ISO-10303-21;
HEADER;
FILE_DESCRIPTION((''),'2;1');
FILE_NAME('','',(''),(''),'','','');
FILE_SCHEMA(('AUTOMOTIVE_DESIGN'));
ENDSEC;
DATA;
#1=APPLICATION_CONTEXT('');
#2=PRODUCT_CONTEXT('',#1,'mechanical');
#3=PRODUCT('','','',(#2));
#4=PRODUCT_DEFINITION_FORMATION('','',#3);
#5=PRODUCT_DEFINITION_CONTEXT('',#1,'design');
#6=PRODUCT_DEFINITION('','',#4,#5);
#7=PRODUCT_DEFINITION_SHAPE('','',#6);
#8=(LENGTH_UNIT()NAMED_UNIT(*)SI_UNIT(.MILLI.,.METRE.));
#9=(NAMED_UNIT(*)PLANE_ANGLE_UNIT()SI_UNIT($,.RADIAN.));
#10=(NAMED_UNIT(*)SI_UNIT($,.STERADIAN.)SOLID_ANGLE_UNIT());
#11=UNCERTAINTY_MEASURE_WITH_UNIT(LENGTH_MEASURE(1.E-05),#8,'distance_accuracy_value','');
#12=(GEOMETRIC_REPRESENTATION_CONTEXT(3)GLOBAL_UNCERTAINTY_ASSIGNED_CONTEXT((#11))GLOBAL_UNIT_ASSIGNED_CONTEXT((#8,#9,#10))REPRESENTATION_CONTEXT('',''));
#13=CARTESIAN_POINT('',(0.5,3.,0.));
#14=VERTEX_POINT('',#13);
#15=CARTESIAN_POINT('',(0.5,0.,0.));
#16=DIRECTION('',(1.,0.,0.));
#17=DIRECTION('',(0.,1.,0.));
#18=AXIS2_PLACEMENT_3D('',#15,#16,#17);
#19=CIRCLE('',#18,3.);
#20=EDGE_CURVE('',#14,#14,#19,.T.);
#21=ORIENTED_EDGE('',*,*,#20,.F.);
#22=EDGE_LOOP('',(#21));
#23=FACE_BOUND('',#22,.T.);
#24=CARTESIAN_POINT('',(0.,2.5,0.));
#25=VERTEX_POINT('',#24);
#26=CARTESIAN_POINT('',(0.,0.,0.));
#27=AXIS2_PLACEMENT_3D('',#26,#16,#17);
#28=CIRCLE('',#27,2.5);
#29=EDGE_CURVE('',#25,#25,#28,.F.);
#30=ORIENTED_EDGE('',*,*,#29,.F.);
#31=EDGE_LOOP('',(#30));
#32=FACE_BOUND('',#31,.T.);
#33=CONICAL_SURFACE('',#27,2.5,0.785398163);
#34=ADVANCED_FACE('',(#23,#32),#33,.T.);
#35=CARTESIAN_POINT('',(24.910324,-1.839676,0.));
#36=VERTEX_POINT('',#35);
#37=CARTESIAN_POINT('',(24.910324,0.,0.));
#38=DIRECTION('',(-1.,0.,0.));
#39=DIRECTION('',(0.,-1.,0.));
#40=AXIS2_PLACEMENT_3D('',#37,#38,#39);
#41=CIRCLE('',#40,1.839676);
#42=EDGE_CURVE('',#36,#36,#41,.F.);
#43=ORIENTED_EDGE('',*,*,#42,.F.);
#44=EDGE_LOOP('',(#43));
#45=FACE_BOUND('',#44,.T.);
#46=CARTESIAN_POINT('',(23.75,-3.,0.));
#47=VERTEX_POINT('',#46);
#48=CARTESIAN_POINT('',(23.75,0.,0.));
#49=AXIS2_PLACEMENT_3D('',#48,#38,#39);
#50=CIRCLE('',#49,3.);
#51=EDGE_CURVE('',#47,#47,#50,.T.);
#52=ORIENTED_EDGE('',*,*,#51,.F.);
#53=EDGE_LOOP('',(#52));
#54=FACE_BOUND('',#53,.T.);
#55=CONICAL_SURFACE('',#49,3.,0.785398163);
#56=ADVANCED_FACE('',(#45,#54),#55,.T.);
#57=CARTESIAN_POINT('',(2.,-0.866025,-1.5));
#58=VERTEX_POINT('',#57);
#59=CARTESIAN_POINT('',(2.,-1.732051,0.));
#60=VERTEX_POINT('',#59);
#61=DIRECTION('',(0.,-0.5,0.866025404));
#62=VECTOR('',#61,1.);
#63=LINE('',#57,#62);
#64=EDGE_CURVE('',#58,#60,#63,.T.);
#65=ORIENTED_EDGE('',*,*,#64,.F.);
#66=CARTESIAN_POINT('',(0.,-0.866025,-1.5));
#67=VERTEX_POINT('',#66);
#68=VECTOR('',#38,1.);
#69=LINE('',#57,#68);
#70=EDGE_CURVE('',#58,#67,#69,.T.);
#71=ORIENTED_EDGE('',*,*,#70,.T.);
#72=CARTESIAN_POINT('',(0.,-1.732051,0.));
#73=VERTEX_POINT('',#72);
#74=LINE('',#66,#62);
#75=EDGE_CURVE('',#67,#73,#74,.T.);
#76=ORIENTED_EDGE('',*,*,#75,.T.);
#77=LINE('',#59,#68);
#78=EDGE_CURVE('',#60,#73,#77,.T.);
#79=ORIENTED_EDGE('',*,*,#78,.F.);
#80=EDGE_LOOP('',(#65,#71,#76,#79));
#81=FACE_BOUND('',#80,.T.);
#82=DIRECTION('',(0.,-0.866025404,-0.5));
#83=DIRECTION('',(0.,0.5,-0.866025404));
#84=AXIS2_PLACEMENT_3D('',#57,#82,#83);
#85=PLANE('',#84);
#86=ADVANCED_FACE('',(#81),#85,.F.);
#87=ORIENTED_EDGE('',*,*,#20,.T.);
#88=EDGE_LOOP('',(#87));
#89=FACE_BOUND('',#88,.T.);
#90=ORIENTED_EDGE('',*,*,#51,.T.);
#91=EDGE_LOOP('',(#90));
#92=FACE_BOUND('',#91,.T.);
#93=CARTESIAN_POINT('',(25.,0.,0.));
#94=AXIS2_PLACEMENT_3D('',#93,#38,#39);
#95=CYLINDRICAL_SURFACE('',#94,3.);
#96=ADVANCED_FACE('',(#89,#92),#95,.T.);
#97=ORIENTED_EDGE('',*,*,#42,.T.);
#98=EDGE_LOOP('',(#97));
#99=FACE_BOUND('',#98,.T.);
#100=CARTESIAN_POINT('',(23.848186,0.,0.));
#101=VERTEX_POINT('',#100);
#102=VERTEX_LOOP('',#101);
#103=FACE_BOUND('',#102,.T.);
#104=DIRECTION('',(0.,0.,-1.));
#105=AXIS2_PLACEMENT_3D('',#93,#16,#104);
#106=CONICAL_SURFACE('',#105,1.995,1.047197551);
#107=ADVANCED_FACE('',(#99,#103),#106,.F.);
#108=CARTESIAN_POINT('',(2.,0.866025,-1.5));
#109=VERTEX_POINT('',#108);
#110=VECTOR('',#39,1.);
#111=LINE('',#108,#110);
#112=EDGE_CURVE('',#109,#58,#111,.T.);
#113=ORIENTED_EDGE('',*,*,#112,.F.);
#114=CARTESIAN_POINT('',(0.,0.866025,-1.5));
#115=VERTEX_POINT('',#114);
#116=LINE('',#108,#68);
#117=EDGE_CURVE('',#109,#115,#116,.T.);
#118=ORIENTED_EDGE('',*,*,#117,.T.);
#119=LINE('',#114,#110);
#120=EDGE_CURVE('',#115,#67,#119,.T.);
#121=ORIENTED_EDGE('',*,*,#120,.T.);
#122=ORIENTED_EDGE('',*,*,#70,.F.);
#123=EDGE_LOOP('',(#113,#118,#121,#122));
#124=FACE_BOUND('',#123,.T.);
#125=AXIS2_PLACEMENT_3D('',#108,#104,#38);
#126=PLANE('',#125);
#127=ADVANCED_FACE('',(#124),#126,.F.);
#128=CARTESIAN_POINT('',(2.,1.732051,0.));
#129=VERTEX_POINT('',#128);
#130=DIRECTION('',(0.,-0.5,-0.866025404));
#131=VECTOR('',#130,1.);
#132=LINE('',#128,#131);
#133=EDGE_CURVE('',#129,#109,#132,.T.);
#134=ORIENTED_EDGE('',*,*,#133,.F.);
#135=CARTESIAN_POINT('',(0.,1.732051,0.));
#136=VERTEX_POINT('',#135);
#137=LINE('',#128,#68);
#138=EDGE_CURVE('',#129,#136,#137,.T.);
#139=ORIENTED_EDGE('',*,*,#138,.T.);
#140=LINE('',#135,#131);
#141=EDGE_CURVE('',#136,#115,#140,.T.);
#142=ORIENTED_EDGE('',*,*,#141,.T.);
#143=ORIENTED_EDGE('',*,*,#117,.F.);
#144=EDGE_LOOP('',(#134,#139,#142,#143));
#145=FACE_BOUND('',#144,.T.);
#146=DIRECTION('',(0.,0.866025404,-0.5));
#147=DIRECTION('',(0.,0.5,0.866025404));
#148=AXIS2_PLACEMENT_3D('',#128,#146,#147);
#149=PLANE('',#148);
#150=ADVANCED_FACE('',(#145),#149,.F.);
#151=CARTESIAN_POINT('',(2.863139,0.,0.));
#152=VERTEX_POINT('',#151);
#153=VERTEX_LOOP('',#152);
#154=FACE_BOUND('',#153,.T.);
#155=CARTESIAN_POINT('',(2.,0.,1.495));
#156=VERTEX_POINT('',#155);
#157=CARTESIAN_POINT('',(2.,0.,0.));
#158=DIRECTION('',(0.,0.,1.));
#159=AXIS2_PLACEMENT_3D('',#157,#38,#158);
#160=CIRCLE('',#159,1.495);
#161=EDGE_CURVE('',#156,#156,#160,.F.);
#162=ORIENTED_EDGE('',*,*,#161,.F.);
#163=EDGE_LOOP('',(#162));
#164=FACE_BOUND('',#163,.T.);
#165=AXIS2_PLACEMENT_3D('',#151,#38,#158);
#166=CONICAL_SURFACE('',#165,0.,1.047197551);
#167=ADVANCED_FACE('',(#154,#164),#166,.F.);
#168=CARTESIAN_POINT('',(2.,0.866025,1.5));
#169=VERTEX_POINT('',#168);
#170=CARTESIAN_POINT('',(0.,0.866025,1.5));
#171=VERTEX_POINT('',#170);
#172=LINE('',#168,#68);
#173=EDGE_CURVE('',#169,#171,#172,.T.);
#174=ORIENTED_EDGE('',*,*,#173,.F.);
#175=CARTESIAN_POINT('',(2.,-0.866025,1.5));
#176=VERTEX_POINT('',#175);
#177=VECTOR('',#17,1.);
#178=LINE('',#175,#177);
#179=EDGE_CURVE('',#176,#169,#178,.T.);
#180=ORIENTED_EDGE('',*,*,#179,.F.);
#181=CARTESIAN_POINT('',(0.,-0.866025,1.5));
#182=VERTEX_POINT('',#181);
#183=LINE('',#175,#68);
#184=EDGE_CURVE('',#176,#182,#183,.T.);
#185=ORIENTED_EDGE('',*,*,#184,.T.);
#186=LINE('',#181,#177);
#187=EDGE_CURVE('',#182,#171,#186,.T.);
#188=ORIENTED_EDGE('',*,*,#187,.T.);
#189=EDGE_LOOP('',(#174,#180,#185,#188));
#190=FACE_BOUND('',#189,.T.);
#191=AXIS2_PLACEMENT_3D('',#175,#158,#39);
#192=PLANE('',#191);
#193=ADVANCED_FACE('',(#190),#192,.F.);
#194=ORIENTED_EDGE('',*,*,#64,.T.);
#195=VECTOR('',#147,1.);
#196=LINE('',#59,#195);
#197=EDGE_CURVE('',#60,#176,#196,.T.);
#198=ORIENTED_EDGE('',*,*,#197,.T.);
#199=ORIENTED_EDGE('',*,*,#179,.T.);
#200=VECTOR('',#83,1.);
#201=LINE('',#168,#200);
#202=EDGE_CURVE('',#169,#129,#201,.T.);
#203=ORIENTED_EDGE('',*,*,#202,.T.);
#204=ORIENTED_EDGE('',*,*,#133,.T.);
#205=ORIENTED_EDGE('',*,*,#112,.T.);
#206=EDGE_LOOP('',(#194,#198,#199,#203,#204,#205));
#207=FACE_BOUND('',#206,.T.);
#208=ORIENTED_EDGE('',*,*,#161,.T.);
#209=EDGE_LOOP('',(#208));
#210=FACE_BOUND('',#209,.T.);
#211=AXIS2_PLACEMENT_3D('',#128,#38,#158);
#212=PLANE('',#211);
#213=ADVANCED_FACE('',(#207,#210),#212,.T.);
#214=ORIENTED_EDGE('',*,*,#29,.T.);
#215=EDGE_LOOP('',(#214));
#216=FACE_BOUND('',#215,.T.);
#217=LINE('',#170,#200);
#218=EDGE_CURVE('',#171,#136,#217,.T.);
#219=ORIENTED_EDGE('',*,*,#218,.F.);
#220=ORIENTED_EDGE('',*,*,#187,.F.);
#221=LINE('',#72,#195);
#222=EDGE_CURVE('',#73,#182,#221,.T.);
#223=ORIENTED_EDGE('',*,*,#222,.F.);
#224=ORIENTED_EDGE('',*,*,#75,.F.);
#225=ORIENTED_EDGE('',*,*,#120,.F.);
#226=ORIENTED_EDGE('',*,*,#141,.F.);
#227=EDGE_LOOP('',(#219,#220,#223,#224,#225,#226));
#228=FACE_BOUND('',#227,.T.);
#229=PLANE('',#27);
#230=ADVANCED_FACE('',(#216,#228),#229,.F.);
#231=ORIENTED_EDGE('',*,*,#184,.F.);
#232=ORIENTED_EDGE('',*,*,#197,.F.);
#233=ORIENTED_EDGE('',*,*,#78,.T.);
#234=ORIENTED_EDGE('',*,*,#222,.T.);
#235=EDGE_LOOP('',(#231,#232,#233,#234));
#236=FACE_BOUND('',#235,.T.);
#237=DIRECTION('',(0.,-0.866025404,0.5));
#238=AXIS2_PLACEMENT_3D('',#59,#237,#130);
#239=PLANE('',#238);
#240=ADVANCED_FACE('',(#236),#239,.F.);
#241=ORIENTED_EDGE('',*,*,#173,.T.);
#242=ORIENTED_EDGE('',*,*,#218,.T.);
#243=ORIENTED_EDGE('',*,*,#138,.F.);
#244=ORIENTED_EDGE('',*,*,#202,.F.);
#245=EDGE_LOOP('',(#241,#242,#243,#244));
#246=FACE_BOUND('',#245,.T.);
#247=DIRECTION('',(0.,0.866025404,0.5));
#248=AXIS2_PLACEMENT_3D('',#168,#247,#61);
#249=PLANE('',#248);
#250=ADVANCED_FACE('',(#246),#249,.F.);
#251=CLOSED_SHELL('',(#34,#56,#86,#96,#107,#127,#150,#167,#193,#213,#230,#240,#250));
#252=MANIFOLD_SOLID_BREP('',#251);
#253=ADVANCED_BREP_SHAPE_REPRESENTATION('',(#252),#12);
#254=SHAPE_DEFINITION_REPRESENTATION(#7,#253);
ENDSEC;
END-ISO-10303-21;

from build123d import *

# Parameters (mm, degrees)
SKETCH1_W          = 25
SKETCH1_H          = 3
CUT_EXTRUDE1_DEPTH = 2
CHAMFER1_SIZE      = 0.5
CHAMFER2_SIZE      = 1.25


with BuildPart() as part:
    # Sketch1 → Revolve1 (revolve)
    with BuildSketch(Plane.XY, mode=Mode.PRIVATE) as revolve1_sk:
        with Locations((12.5, 1.5)):
            Rectangle(SKETCH1_W, SKETCH1_H)
    revolve(revolve1_sk.sketch.rotate(Axis((25, 0, 0), (-1, 0, 0)), 180), axis=Axis((25, 0, 0), (-1, 0, 0)))

    # Sketch2 → Cut-Revolve1 (revolve, cut)
    with BuildSketch(Plane.XY, mode=Mode.PRIVATE) as cut_revolve1_sk:
        Polygon((2, 1.495), (2.863138652, 0), (0, 0), (0, 1.495), align=None)
    revolve(cut_revolve1_sk.sketch.rotate(Axis((-1.178327448, 0, 0), (1, 0, 0)), 270), axis=Axis((-1.178327448, 0, 0), (1, 0, 0)), mode=Mode.SUBTRACT)

    # Sketch3 → Cut-Extrude1 (cut)
    with BuildSketch(Plane.ZY):
        Polygon((0, 1.732050808), (-1.5, 0.866025404), (-1.5, -0.866025404), (0, -1.732050808), (1.5, -0.866025404), (1.5, 0.866025404), align=None)
    extrude(amount=-CUT_EXTRUDE1_DEPTH, mode=Mode.SUBTRACT)

    # Sketch4 → Cut-Revolve2 (revolve, cut)
    with BuildSketch(Plane.XY, mode=Mode.PRIVATE) as cut_revolve2_sk:
        Polygon((25, 1.995), (25, 0), (23.848186213, 0), align=None)
    revolve(cut_revolve2_sk.sketch.rotate(Axis((-1.256465595, 0, 0), (1, 0, 0)), 90), axis=Axis((-1.256465595, 0, 0), (1, 0, 0)), mode=Mode.SUBTRACT)

    # Chamfer1
    chamfer1_edges = [part.edges().sort_by_distance(p)[0] for p in [
        (0, 3, 0),
    ]]
    chamfer(chamfer1_edges, length=CHAMFER1_SIZE)

    # Chamfer2
    # the kernel refuses this chamfer: 1.25 mm, written as the material it takes off along each edge
    with BuildSketch(Plane(origin=(25, 0, 0), x_dir=(0, -1, 0), z_dir=(0, 0, -1))) as chamfer2_piece_1:
        Polygon((3, CHAMFER2_SIZE), (3 - CHAMFER2_SIZE, 0), (3, 0), align=None)
    revolve(axis=Axis((25, 0, 0), (-1, 0, 0)), mode=Mode.SUBTRACT)


solid = part.part
